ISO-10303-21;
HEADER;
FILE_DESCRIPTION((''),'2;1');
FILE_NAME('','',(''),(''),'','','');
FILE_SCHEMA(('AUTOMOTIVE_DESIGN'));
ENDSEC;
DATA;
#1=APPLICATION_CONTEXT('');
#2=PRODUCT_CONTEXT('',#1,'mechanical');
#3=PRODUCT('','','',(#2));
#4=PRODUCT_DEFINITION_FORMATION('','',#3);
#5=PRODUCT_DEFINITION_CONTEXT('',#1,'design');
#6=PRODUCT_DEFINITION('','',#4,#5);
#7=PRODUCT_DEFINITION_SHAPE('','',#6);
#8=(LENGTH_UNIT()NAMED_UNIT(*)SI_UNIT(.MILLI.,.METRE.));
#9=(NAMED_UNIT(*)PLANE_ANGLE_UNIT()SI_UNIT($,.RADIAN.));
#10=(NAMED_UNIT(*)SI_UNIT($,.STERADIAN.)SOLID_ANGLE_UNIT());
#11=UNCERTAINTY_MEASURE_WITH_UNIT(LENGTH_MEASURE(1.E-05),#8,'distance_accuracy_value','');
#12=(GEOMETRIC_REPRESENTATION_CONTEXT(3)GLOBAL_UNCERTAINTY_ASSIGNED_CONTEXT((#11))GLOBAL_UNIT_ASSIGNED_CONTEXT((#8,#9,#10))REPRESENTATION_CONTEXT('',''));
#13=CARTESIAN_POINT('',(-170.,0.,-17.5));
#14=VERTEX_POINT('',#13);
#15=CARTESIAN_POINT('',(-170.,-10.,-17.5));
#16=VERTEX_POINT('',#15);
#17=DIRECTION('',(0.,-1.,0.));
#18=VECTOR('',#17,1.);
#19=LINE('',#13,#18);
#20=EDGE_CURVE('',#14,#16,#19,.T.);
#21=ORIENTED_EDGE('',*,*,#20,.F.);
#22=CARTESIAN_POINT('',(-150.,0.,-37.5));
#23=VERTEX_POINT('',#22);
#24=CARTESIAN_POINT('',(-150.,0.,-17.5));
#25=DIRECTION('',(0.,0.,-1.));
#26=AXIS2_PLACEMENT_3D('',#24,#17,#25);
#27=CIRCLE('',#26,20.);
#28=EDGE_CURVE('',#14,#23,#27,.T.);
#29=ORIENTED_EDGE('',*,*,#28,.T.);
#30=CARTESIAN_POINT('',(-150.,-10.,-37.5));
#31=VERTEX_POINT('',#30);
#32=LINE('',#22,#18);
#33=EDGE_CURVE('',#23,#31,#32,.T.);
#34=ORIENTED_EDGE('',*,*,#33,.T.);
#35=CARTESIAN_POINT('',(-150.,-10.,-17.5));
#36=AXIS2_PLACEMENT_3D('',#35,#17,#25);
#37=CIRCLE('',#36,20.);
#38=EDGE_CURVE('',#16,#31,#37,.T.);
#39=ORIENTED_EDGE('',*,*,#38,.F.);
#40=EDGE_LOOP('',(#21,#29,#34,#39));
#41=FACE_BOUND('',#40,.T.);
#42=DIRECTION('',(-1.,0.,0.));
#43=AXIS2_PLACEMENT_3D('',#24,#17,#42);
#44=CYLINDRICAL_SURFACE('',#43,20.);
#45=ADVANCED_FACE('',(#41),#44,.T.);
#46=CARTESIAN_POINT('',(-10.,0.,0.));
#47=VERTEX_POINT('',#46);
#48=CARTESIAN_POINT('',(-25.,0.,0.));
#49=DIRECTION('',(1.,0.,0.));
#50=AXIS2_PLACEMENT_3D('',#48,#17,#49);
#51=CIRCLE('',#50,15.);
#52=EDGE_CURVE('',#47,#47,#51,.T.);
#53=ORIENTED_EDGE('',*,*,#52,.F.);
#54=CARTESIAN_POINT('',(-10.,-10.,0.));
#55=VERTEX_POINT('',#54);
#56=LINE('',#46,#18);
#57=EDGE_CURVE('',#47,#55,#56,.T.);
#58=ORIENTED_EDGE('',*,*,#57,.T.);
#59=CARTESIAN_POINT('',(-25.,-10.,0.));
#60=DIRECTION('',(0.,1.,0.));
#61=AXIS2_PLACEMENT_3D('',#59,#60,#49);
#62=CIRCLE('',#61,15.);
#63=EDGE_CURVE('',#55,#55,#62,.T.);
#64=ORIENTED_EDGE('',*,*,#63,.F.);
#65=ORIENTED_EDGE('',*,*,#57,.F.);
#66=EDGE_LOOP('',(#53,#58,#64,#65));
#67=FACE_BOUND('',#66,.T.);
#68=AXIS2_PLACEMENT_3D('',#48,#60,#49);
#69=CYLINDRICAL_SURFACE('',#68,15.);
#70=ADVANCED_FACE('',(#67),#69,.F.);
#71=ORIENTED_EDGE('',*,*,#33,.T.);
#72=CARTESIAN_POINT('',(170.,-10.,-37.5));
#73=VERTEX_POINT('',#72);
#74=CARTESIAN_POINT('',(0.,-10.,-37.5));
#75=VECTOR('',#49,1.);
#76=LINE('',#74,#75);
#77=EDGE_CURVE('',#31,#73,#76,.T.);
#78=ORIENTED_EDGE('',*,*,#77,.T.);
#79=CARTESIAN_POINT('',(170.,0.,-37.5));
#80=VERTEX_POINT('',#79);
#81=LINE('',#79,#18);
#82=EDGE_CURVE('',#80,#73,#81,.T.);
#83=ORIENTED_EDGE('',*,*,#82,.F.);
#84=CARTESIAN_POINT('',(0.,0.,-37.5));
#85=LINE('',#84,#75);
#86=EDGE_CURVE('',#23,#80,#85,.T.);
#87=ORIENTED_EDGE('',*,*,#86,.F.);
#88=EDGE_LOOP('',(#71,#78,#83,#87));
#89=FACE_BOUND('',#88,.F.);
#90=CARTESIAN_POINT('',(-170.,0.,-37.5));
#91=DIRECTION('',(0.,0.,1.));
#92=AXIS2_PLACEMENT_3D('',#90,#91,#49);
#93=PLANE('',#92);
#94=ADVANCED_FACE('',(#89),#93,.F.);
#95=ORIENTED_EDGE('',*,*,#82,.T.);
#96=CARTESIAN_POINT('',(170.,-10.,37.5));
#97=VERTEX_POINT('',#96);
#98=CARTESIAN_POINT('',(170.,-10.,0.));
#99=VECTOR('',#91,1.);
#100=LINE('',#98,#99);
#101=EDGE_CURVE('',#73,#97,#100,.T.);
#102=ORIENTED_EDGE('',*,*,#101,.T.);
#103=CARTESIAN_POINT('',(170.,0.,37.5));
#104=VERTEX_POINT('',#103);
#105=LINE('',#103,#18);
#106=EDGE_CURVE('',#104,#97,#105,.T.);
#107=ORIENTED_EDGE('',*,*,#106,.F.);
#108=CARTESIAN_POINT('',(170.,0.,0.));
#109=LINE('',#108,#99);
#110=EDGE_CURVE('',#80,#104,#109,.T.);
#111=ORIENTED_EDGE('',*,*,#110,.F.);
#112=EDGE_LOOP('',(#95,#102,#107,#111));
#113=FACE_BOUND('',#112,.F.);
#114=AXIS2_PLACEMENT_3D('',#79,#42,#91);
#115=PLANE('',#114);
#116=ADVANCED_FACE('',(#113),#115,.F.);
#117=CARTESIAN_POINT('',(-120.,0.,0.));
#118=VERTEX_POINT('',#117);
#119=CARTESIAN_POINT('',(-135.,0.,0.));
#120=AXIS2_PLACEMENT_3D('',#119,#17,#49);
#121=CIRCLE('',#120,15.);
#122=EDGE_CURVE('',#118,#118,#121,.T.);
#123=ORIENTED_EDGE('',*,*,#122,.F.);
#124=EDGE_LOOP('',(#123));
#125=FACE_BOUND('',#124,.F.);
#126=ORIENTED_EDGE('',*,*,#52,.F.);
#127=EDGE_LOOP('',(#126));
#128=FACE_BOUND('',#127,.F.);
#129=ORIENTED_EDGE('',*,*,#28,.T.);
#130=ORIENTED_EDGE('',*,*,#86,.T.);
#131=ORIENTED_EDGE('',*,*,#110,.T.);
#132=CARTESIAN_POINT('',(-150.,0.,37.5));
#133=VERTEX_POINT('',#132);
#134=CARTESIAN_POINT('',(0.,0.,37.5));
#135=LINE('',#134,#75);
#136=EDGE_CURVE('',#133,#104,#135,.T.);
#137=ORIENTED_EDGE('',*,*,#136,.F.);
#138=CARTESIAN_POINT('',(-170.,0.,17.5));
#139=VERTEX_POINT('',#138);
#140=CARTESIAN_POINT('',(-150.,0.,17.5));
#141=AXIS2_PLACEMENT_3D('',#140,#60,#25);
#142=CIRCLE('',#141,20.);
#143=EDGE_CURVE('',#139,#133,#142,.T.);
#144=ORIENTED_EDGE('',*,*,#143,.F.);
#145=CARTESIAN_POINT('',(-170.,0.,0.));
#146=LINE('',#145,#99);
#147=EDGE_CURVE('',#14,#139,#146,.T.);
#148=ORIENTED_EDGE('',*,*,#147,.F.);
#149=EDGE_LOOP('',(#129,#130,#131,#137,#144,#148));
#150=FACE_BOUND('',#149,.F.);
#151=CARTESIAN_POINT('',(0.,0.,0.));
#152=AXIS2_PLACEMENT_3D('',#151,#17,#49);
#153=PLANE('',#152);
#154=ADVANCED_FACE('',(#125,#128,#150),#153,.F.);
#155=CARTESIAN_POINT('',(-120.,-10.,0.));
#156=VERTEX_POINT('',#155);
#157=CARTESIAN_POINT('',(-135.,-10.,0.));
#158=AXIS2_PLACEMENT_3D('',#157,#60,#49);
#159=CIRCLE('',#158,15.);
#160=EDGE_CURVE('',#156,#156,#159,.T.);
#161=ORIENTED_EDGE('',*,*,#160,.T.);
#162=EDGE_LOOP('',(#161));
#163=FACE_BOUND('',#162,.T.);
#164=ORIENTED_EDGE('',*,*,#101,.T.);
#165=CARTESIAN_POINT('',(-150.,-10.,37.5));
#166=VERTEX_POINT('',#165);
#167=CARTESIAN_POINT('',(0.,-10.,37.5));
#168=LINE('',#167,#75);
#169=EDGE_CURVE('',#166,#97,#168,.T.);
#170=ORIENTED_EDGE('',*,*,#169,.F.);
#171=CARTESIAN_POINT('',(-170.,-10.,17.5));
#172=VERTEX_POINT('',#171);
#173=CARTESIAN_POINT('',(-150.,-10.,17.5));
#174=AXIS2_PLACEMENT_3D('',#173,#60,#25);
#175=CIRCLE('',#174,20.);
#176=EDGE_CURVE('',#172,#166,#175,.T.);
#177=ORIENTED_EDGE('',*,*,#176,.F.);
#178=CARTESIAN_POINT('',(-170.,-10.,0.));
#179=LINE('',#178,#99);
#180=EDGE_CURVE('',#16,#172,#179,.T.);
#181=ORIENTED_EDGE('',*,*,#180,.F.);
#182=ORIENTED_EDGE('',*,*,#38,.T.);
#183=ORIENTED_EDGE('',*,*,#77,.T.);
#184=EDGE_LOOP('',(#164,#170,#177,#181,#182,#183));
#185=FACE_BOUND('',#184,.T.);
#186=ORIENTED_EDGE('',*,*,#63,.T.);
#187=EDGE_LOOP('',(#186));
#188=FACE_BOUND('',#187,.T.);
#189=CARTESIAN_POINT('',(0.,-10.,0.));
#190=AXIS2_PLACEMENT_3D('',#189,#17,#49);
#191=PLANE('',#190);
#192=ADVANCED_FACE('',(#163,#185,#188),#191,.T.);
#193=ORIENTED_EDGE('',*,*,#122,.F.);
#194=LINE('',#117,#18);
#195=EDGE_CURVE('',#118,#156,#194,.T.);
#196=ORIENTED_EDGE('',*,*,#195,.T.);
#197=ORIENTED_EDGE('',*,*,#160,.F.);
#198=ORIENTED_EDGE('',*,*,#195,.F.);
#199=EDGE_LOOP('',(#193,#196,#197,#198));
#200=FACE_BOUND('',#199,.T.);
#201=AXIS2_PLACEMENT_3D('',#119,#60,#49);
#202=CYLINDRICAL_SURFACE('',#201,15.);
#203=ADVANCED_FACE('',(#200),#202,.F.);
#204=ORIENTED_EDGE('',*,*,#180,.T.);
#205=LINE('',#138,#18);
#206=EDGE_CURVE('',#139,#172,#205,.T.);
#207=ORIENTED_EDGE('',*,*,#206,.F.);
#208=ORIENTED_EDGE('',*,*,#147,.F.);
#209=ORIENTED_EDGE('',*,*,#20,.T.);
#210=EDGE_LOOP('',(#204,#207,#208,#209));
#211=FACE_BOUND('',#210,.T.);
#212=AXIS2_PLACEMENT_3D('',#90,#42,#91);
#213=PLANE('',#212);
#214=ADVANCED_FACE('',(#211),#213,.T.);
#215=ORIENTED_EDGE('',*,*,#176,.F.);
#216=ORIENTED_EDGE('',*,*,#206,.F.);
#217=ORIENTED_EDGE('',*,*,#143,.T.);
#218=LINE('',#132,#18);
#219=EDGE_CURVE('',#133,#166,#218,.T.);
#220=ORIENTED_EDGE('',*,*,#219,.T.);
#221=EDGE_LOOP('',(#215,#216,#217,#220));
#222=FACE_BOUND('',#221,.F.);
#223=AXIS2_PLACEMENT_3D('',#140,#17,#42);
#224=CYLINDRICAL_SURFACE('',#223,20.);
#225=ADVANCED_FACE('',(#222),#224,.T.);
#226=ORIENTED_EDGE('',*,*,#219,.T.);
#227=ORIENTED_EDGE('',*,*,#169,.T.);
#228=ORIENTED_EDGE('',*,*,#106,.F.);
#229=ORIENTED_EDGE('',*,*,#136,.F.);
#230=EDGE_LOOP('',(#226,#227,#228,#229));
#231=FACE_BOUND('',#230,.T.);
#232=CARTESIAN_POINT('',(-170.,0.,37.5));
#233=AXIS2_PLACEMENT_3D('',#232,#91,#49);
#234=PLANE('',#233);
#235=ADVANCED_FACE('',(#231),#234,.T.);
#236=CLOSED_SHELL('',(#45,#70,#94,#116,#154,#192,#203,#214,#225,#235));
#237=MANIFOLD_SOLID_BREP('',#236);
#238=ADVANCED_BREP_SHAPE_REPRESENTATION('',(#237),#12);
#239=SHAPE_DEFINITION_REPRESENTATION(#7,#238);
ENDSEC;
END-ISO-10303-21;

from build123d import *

# Parameters (mm, degrees)
F0_W          = 340
F0_H          = 75
F1_DEPTH      = 10
F2_R          = 20
F3_R          = 15
F4_DEPTH      = 354
F4_DEPTH_BACK = 25


# Not quite as in the source:
# - an extrude ends at something that could not be found from the text; its depth is read off the source's solid


with BuildPart() as f1:
    # F0 (on Front) → F1 (new body)
    with BuildSketch(Plane.XZ):
        Rectangle(F0_W, F0_H)
    extrude(amount=F1_DEPTH)

    # F2
    f2_edges = [f1.edges().sort_by_distance(p)[0] for p in [
        (-170, -5, 37.5),
        (-170, -5, -37.5),
    ]]
    fillet(f2_edges, radius=F2_R)

    # F3 (on Front) → F4 (cut, two sides)
    with BuildSketch(Plane.XZ) as f4_sk:
        with Locations((-135, 0)):
            Circle(F3_R)
        with Locations((-25, 0)):
            Circle(F3_R)
    extrude(amount=-F4_DEPTH, mode=Mode.SUBTRACT)
    extrude(f4_sk.sketch, amount=F4_DEPTH_BACK, mode=Mode.SUBTRACT)


solid = f1.part
